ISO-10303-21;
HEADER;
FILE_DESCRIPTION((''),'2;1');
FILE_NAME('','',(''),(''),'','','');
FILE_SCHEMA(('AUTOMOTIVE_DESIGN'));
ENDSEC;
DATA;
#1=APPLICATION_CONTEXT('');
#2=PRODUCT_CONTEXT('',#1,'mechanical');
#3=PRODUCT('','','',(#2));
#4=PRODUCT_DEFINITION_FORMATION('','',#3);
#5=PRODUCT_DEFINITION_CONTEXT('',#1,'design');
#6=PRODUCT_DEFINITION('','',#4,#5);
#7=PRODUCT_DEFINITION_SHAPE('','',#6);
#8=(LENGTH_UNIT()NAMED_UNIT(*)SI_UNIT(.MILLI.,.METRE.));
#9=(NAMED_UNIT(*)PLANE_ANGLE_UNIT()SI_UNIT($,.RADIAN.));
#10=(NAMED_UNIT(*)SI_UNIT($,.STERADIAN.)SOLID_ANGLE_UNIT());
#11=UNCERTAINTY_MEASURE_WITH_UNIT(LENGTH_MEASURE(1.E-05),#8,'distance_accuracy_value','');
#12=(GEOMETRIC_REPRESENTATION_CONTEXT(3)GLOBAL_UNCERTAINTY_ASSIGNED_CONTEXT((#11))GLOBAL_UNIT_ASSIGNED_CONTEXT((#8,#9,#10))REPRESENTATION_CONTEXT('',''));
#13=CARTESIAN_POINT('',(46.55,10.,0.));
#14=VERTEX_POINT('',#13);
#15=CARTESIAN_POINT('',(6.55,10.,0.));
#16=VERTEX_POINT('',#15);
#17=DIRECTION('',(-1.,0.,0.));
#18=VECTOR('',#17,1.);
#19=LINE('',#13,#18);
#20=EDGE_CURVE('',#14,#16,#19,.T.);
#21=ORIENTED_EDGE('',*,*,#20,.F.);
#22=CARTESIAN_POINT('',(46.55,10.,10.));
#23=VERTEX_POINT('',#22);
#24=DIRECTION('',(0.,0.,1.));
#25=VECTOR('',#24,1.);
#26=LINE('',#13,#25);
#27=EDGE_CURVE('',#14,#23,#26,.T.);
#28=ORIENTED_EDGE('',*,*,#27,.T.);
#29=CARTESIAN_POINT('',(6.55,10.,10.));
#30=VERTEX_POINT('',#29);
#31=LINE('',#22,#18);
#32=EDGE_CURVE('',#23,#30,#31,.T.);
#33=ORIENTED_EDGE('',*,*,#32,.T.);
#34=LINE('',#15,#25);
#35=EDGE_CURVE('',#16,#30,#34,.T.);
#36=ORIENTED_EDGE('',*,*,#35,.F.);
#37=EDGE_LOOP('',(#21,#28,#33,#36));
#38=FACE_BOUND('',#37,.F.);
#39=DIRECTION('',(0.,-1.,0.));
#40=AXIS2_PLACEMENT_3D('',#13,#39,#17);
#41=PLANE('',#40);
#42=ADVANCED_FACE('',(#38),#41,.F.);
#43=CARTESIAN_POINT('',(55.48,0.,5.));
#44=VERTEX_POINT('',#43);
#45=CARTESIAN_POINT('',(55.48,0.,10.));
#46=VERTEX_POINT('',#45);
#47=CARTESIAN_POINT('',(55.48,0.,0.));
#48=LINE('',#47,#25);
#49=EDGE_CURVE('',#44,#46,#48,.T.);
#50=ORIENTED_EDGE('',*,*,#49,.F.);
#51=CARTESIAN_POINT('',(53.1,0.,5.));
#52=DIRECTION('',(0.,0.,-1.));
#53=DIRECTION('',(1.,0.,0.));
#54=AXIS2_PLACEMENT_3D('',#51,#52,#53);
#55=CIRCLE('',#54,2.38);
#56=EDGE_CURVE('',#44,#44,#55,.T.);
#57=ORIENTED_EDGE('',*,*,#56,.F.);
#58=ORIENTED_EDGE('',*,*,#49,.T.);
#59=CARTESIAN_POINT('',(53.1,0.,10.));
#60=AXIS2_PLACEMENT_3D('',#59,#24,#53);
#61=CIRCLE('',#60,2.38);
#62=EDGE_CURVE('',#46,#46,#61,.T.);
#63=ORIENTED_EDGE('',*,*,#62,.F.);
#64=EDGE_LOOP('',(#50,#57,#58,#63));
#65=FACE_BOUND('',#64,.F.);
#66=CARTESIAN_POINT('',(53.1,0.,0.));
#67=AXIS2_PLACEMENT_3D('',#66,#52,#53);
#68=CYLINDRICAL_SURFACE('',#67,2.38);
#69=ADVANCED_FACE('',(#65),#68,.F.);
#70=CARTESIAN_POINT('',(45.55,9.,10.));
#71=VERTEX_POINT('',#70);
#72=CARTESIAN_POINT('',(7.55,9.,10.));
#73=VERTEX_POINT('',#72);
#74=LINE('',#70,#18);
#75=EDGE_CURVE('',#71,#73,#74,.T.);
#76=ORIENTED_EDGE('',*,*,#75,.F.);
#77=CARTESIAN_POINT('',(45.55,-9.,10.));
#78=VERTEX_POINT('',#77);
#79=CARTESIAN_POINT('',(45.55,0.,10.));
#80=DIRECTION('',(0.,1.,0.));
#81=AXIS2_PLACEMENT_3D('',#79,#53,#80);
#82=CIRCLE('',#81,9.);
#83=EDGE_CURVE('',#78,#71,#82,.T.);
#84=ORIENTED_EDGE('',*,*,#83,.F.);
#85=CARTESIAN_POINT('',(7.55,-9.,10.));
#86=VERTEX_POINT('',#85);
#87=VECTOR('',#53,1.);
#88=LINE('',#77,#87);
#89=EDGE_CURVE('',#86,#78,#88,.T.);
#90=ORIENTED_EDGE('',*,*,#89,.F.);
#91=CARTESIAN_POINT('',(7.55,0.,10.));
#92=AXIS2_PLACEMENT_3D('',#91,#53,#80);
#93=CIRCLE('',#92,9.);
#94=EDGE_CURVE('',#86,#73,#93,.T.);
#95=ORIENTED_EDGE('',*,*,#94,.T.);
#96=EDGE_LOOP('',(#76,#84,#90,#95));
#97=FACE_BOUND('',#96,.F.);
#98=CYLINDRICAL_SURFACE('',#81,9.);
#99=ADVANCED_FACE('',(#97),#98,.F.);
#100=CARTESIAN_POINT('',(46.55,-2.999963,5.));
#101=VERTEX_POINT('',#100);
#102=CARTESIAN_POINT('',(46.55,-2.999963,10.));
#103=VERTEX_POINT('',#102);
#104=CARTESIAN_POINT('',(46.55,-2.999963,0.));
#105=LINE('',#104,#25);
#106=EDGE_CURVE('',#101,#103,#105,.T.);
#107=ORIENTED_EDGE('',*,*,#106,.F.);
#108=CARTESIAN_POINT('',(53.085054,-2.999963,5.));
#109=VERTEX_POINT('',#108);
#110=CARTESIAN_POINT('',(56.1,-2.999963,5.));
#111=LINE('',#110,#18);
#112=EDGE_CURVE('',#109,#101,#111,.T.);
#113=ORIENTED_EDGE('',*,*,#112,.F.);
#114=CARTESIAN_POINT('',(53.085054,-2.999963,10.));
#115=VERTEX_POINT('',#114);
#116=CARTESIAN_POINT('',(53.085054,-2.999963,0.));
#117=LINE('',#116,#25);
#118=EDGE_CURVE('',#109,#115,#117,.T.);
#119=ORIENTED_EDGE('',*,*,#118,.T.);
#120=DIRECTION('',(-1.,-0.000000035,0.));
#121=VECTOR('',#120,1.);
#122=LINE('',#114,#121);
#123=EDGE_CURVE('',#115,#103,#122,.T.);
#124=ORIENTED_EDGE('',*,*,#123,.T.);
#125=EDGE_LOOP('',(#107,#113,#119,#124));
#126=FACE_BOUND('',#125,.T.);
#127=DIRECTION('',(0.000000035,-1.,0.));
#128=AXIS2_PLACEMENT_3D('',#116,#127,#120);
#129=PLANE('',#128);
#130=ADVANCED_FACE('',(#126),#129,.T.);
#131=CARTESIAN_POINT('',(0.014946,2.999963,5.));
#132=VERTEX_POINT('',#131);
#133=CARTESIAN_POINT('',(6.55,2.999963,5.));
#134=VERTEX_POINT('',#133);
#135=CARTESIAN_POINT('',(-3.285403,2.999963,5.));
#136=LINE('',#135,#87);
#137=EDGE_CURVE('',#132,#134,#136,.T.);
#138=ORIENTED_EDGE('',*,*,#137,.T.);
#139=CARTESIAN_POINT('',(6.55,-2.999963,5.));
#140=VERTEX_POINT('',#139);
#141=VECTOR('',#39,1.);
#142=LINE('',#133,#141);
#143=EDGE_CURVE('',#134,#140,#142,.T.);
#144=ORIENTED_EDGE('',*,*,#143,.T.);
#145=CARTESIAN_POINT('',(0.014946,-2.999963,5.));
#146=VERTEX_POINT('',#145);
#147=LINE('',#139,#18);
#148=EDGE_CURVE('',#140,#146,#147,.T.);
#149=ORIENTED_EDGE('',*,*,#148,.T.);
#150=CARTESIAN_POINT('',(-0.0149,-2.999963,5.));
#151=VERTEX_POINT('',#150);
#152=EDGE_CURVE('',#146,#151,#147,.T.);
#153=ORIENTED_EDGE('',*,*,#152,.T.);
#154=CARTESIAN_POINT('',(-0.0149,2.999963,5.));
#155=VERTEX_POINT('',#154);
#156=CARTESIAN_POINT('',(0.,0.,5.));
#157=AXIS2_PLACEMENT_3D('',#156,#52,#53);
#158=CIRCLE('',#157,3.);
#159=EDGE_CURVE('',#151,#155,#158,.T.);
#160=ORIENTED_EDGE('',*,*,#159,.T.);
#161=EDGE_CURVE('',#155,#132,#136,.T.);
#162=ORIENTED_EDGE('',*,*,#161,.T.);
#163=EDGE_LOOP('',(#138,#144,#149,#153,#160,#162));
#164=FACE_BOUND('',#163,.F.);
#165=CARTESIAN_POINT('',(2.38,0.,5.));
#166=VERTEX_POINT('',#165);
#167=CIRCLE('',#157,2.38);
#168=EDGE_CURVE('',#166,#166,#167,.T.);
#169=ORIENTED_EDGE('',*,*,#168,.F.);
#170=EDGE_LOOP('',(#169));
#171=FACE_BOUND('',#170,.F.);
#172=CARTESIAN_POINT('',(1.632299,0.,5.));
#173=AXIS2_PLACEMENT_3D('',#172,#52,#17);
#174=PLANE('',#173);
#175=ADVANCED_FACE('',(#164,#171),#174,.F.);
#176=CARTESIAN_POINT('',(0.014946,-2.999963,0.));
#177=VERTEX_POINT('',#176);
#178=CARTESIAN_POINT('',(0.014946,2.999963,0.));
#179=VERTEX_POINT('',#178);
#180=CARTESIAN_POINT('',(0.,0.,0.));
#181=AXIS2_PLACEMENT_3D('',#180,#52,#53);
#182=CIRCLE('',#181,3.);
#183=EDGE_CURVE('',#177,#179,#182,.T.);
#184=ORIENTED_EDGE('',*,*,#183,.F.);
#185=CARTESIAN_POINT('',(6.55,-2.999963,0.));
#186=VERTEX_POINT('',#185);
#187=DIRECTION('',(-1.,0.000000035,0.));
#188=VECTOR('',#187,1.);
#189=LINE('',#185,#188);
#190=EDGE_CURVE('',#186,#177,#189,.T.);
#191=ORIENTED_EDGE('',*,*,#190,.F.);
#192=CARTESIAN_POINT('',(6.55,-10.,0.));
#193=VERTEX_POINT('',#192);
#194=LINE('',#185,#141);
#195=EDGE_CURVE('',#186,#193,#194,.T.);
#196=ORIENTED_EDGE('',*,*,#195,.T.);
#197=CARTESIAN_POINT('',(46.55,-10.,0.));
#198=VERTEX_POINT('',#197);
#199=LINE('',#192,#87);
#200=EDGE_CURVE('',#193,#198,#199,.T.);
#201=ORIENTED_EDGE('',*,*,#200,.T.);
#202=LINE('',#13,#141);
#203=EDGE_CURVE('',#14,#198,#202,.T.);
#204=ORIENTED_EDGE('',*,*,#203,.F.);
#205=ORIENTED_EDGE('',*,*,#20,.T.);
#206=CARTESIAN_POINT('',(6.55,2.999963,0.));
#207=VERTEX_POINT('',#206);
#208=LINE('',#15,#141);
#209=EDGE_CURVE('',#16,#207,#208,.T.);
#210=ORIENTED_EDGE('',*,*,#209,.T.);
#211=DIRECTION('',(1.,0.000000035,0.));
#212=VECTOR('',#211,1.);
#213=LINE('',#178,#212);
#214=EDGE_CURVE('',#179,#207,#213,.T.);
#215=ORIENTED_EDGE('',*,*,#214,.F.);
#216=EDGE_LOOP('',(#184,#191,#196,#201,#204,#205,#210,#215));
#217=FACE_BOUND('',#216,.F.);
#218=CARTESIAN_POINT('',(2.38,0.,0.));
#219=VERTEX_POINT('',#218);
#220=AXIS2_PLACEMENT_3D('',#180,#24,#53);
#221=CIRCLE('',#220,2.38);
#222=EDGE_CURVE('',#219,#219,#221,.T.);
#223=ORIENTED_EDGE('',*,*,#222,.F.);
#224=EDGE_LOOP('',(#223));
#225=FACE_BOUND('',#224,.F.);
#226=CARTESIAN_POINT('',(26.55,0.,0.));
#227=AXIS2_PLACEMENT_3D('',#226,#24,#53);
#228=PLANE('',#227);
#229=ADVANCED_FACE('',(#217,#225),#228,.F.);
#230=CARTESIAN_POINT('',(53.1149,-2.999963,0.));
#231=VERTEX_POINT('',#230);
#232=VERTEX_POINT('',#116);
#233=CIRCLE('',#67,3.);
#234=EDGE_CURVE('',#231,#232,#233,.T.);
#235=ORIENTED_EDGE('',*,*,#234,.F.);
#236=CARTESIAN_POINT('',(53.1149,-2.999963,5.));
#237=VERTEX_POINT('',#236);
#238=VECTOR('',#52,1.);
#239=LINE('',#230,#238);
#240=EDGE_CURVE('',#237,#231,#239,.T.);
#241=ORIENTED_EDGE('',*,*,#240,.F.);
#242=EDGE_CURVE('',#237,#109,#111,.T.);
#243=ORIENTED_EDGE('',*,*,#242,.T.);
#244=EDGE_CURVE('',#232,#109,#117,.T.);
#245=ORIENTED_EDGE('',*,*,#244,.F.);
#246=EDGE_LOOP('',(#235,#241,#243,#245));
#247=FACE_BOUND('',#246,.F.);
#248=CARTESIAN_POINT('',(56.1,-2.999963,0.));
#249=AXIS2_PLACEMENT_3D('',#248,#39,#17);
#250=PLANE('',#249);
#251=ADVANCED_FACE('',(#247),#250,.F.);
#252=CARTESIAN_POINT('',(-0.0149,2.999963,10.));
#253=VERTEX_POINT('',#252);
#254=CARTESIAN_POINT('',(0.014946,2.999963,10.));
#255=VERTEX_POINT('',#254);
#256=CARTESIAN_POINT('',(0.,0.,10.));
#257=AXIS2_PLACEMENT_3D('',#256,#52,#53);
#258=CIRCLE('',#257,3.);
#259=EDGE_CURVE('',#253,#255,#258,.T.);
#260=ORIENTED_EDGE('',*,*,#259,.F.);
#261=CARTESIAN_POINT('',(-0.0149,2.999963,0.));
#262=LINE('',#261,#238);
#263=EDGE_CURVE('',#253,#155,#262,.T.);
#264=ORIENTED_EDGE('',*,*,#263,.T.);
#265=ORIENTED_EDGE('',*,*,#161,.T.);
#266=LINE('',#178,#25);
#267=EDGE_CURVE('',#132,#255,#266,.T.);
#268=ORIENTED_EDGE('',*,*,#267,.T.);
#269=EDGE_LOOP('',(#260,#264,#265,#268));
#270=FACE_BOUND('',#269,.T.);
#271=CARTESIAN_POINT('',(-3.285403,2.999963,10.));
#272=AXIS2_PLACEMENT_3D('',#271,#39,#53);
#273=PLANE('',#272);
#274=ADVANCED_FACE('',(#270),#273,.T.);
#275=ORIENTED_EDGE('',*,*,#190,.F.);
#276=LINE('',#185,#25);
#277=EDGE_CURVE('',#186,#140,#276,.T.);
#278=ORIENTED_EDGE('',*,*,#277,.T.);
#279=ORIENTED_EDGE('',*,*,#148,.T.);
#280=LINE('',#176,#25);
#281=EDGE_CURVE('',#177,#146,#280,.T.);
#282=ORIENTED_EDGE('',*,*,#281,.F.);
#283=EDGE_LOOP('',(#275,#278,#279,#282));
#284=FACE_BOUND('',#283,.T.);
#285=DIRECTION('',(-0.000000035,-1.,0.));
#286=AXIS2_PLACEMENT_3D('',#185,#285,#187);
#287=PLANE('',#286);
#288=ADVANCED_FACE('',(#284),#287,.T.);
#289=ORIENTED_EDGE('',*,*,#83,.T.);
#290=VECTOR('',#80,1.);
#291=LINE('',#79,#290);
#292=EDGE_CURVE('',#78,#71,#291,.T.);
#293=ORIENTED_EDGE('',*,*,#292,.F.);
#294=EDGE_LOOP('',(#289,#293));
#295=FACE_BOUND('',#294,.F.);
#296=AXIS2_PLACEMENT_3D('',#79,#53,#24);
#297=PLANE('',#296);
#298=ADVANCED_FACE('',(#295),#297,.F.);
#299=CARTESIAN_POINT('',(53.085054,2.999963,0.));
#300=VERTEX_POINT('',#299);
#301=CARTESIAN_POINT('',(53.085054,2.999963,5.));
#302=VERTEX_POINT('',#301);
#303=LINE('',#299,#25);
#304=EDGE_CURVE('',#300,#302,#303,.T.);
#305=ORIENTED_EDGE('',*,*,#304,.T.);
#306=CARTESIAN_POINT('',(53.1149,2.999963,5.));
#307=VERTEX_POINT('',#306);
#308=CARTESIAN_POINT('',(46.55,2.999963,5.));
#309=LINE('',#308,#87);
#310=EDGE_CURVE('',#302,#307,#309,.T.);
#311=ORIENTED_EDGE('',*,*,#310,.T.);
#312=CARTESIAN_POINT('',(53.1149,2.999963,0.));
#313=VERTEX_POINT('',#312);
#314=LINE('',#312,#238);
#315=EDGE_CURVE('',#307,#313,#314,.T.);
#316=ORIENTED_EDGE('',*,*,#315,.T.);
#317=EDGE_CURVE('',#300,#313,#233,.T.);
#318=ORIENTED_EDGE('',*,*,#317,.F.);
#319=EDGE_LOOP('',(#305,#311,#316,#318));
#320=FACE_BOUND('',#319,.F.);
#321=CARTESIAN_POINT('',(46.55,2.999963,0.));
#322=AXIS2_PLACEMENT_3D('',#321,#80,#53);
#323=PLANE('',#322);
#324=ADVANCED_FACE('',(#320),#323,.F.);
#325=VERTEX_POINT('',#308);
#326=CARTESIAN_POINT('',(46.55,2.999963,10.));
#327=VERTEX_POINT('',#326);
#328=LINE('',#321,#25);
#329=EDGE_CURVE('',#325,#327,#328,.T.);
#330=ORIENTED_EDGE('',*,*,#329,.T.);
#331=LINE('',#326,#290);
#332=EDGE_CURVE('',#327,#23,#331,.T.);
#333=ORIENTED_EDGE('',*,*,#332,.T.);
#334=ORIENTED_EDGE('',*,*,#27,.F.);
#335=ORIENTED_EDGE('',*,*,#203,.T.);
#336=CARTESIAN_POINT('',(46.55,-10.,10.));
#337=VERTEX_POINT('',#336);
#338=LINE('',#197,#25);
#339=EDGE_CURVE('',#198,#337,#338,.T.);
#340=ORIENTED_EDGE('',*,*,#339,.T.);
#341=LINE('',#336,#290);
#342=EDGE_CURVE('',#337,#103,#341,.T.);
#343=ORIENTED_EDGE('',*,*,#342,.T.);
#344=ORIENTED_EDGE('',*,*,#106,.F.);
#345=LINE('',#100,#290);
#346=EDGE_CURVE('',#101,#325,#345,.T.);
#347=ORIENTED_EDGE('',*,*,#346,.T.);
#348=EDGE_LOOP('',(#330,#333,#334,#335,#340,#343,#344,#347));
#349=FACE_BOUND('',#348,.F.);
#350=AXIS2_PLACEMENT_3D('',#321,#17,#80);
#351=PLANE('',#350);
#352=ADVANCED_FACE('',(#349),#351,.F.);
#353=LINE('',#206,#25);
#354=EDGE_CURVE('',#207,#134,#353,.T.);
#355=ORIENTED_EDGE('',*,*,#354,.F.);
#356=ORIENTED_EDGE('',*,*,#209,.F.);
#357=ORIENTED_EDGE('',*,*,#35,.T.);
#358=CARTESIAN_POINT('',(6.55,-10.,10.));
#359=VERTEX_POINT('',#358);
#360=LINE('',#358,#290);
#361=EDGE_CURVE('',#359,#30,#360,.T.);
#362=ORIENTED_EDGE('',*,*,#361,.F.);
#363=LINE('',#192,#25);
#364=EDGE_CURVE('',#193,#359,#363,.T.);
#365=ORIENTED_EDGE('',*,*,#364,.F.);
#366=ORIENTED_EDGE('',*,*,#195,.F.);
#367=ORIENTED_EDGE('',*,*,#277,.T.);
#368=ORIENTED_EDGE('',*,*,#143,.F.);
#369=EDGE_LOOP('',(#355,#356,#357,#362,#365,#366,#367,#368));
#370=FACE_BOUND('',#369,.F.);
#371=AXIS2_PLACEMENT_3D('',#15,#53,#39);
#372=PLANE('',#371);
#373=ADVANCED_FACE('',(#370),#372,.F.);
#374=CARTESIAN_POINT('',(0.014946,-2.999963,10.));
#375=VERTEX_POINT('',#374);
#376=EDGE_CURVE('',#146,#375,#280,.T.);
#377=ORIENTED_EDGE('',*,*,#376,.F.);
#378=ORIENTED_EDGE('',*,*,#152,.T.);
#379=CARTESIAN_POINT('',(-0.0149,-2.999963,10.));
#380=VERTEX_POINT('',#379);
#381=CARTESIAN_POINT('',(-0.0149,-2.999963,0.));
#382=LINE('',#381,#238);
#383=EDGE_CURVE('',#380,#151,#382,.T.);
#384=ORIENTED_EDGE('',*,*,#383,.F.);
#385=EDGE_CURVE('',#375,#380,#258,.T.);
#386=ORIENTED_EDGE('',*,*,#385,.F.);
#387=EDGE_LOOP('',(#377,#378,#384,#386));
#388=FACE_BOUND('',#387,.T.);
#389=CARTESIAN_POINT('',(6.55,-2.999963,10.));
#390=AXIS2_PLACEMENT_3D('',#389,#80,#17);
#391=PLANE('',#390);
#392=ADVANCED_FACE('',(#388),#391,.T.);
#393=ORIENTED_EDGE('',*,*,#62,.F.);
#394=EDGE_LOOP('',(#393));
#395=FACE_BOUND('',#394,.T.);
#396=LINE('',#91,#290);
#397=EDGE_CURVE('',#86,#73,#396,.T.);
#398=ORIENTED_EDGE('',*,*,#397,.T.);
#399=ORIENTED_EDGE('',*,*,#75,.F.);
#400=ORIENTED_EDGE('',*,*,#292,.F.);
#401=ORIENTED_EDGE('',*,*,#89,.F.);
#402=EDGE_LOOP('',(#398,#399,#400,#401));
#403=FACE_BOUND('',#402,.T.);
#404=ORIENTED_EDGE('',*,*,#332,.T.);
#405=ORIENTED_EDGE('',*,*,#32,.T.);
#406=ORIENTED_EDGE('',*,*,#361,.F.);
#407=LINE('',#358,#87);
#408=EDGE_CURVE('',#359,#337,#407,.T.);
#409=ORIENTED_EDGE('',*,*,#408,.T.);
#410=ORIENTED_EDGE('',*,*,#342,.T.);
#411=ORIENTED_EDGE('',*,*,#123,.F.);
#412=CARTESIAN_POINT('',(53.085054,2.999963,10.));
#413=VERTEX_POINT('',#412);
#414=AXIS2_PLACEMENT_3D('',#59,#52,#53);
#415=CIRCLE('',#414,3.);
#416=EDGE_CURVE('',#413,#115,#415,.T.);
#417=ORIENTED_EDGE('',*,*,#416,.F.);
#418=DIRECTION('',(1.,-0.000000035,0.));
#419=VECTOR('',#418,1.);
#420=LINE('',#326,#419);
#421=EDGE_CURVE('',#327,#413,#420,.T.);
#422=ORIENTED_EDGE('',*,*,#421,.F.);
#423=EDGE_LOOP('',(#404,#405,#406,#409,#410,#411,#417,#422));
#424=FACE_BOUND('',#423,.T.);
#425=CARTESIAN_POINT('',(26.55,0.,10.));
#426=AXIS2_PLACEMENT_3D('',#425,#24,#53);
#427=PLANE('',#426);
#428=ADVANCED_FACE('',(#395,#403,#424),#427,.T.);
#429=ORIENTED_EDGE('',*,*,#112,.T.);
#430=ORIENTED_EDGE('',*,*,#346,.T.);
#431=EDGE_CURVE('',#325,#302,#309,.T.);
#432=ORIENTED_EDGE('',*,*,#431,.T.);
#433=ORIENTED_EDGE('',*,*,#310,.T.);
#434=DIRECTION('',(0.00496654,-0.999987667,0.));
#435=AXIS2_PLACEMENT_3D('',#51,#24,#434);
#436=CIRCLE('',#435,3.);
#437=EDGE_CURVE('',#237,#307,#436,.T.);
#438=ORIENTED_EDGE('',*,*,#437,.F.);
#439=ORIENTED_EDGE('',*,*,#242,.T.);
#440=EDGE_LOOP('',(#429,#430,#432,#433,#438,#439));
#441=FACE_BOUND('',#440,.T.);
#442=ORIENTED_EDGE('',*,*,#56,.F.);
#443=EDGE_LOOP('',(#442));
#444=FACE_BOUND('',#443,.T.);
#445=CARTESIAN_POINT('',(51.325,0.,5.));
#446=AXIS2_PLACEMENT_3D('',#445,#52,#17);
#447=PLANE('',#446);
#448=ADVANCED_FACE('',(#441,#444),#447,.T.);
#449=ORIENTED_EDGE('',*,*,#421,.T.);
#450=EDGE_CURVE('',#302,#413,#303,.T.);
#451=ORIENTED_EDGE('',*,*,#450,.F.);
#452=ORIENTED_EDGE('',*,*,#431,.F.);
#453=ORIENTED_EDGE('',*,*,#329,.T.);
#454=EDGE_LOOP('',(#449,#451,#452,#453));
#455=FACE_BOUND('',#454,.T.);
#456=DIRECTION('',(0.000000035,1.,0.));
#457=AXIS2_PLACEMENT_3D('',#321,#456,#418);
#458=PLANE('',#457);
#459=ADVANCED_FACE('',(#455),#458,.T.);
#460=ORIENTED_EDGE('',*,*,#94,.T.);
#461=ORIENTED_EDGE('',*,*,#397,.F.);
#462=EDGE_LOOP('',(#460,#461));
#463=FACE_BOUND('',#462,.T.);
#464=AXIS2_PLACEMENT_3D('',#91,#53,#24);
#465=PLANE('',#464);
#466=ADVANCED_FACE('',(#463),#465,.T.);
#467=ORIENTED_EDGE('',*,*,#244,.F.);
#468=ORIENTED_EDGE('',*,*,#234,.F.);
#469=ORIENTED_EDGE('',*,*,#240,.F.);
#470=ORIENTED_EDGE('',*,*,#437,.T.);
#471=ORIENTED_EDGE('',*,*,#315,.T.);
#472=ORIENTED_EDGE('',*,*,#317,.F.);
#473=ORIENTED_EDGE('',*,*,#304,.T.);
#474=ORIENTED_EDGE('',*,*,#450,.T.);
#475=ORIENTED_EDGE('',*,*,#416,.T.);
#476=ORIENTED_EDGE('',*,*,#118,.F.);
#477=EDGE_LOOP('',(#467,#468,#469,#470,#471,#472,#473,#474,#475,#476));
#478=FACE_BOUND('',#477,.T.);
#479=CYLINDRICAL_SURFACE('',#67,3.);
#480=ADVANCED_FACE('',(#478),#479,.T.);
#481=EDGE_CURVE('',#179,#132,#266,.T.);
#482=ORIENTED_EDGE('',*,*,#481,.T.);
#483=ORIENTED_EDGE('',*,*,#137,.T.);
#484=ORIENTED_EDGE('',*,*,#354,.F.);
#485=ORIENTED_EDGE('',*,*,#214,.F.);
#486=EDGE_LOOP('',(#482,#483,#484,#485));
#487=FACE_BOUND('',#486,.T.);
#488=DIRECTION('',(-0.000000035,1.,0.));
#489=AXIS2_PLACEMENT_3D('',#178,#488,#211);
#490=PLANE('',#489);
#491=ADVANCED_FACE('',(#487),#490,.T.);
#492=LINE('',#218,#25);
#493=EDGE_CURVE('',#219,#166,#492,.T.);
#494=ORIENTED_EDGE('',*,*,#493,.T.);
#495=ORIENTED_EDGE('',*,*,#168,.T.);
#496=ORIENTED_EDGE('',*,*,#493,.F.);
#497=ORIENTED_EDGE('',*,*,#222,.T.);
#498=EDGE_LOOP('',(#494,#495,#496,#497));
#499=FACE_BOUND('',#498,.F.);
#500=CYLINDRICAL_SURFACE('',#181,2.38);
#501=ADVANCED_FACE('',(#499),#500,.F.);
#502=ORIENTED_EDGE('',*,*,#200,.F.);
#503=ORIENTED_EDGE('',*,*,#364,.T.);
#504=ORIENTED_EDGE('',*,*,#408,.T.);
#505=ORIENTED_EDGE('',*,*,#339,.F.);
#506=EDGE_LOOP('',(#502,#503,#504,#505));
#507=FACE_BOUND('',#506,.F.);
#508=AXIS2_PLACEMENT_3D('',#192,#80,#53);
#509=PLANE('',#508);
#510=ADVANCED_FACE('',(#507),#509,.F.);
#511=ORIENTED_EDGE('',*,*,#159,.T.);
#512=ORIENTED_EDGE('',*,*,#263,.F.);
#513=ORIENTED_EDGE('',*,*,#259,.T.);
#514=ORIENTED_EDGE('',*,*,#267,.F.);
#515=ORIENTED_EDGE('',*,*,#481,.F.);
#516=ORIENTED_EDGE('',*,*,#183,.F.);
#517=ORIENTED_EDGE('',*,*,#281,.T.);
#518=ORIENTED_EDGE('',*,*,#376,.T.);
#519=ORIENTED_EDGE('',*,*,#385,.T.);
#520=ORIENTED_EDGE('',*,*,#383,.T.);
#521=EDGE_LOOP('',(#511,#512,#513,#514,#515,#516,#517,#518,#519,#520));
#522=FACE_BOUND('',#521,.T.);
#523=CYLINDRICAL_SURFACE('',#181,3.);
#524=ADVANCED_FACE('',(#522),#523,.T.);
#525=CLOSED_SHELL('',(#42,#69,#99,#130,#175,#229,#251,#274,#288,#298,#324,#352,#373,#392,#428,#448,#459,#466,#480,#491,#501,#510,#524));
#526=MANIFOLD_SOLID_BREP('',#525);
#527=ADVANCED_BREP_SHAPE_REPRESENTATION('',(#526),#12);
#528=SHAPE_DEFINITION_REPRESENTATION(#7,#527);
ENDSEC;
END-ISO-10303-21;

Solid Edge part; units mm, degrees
sketch "Sketch1" plane through (0, 0, 0) normal (0, 0, 1) x (1, 0, 0)
  line L0 (6.55, 10) -> (6.55, 2.999963)
  line L1 (0.014946, 2.999963) -> (6.55, 2.999963)
  line L2 (6.55, -2.999963) -> (0.014946, -2.999963)
  line L3 (6.55, -2.999963) -> (6.55, -10)
  line L4 (6.55, -10) -> (46.55, -10)
  line L5 (46.55, -10) -> (46.55, -2.999963)
  line L6 (53.085054, -2.999963) -> (46.55, -2.999963)
  line L7 (46.55, 2.999963) -> (53.085054, 2.999963)
  line L8 (46.55, 2.999963) -> (46.55, 10)
  line L9 (46.55, 10) -> (6.55, 10)
  arc A0 (0.0149, -2.999963) -> (0.0149, 2.999963) centre (0, 0) cw
  arc A1 (53.0851, 2.999963) -> (53.0851, -2.999963) centre (53.1, 0) cw
  circle A2 centre (0, 0) radius 2.38
  circle A3 centre (53.1, 0) radius 2.38
extrude "Protrusion1" add sketch "Sketch1" along normal blind 10
sketch "Sketch2" plane through (45.55, -6.499981, 5) normal (1, 0, 0) x (0, 1, 0)
  circle A0 centre (6.499981, 5) radius 9
extrude "ExtrudedCutout_1" cut sketch "Sketch2" against normal blind 38
sketch "Sketch3" plane through (26.55, 0, 0) normal (0, 0, -1) x (1, 0, 0)
  line L0 (29.55, -2.999963) -> (29.55, 2.999963)
  line L1 (29.55, 2.999963) -> (20, 2.999963)
  line L2 (20, 2.999963) -> (20, -2.999963)
  line L3 (20, -2.999963) -> (29.55, -2.999963)
extrude "ExtrudedCutout_2" cut sketch "Sketch3" against normal blind 5
sketch "Sketch4" plane through (26.55, 0, 10) normal (0, 0, 1) x (1, 0, 0)
  line L0 (-20, -2.999963) -> (-29.835403, -2.999963)
  line L1 (-29.835403, -2.999963) -> (-29.835403, 2.999963)
  line L2 (-29.835403, 2.999963) -> (-20, 2.999963)
  line L3 (-20, 2.999963) -> (-20, -2.999963)
extrude "ExtrudedCutout_3" cut sketch "Sketch4" against normal blind 5
